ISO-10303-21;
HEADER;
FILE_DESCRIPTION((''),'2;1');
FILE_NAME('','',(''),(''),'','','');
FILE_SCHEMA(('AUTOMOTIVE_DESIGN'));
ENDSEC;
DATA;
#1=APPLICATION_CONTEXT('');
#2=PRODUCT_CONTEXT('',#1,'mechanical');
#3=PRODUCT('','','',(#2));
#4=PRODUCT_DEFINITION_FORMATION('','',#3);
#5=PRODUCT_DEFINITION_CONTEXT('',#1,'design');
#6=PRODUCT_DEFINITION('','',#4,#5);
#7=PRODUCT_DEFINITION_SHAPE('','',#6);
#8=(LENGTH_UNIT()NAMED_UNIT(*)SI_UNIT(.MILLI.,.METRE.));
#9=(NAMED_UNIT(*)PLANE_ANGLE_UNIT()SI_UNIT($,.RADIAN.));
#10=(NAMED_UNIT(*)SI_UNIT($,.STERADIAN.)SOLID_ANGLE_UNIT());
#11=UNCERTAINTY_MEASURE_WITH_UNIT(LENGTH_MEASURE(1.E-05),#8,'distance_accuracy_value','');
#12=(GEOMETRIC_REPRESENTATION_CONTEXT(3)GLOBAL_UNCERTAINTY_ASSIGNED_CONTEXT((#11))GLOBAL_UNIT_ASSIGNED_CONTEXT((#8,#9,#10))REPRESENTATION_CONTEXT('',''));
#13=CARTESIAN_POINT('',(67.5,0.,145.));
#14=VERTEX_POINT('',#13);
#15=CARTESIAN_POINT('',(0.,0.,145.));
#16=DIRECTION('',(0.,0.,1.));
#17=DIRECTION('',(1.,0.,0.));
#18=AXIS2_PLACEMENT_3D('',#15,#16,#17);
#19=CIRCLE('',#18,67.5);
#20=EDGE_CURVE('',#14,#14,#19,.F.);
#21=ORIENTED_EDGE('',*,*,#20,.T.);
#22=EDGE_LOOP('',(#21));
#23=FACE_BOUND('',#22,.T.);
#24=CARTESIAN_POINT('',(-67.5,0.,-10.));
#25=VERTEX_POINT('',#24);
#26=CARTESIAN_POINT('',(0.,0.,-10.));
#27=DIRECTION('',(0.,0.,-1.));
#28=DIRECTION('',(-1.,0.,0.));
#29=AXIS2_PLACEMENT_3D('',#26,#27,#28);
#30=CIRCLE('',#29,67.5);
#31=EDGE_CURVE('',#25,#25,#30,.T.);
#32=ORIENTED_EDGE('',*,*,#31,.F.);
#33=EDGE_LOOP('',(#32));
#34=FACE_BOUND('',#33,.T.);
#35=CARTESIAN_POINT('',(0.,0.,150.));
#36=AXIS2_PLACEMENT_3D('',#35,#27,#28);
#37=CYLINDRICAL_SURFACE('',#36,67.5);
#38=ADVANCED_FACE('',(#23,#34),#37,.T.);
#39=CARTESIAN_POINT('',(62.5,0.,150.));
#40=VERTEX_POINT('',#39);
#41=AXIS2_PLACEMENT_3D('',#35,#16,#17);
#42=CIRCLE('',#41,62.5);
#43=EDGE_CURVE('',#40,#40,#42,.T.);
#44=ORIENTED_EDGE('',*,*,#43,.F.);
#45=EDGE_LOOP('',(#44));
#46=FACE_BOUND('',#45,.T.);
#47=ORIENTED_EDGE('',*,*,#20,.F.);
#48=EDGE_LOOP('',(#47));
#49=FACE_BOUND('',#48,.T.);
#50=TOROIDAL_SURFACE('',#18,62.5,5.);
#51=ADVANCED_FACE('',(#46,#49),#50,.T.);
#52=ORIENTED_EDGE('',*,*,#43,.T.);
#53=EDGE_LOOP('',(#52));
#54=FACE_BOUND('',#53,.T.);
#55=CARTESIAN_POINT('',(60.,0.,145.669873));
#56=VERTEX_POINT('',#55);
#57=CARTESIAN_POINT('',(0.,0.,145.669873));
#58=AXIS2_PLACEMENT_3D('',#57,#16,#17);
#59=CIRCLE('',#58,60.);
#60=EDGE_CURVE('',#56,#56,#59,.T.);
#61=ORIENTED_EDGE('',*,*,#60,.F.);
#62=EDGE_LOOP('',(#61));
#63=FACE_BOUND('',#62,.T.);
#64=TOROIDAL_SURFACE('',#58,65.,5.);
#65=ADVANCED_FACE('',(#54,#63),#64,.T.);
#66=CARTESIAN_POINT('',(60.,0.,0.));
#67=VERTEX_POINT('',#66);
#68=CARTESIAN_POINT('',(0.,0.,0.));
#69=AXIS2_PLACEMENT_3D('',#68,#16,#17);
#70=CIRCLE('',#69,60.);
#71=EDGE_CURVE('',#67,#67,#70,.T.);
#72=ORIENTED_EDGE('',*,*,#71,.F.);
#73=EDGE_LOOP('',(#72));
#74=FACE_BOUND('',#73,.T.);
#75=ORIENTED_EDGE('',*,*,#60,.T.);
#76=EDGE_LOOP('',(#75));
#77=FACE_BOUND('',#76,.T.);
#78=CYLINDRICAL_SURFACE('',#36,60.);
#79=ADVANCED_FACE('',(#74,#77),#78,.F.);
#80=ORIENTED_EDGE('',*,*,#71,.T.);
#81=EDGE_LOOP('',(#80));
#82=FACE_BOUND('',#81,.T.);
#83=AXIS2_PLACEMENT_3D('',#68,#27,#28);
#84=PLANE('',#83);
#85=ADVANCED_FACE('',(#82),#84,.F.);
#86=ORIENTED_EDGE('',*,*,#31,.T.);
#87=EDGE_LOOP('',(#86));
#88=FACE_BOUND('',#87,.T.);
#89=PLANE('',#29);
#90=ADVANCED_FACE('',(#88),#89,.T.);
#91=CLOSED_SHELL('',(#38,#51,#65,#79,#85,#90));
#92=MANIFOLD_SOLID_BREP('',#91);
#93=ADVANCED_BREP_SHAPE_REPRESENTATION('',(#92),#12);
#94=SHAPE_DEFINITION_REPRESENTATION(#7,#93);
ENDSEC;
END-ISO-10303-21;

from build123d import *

# Parameters (mm, degrees)
IZIM1_R                     = 67.5
IZIM1_R_2                   = 60
Y_KSEKLIK_EKSTR_ZYON1_DEPTH = 150
Y_KSEKLIK_EKSTR_ZYON2_START = 10
IZIM2_R                     = 67.5
Y_KSEKLIK_EKSTR_ZYON2_DEPTH = 10
RADYUS1_R                   = 5
RADYUS2_R                   = 5


with BuildPart() as part:
    # Çizim1 → Yükseklik-Ekstrüzyon1 (new body)
    with BuildSketch(Plane.XY):
        Circle(IZIM1_R)
        Circle(IZIM1_R_2, mode=Mode.SUBTRACT)
    extrude(amount=Y_KSEKLIK_EKSTR_ZYON1_DEPTH)

    # Çizim2 → Yükseklik-Ekstrüzyon2 (add)
    with BuildSketch(Plane(origin=(0, 0, 0), x_dir=(-1, 0, 0), z_dir=(0, 0, -1)).offset(Y_KSEKLIK_EKSTR_ZYON2_START)):
        Circle(IZIM2_R)
    extrude(amount=-Y_KSEKLIK_EKSTR_ZYON2_DEPTH)

    # Radyus1
    radyus1_edges = [part.edges().sort_by_distance(p)[0] for p in [
        (-67.5, 0, 150),
    ]]
    fillet(radyus1_edges, radius=RADYUS1_R)

    # Radyus2
    # the kernel refuses this fillet: 5 mm, written as the material it takes off along each edge
    with BuildSketch(Plane(origin=(0, 0, 150), x_dir=(1, 0, 0), z_dir=(0, -1, 0))) as radyus2_piece_1:
        with BuildLine():
            CenterArc((65, -4.330127019), RADYUS2_R, 120, 60)
            Line((60, -4.330127019), (59.9, -4.330127019))
            Line((59.9, -4.330127019), (59.9, 0))
            Line((59.9, 0), (60, 0.1))
            ThreePointArc((60, 0.1), (61.25, 0.1), (62.45, 0.08660254))
            Line((62.45, 0.08660254), (62.5, 0))
        make_face()
    revolve(axis=Axis((0, 0, 150), (0, 0, 1)), mode=Mode.SUBTRACT)


solid = part.part
